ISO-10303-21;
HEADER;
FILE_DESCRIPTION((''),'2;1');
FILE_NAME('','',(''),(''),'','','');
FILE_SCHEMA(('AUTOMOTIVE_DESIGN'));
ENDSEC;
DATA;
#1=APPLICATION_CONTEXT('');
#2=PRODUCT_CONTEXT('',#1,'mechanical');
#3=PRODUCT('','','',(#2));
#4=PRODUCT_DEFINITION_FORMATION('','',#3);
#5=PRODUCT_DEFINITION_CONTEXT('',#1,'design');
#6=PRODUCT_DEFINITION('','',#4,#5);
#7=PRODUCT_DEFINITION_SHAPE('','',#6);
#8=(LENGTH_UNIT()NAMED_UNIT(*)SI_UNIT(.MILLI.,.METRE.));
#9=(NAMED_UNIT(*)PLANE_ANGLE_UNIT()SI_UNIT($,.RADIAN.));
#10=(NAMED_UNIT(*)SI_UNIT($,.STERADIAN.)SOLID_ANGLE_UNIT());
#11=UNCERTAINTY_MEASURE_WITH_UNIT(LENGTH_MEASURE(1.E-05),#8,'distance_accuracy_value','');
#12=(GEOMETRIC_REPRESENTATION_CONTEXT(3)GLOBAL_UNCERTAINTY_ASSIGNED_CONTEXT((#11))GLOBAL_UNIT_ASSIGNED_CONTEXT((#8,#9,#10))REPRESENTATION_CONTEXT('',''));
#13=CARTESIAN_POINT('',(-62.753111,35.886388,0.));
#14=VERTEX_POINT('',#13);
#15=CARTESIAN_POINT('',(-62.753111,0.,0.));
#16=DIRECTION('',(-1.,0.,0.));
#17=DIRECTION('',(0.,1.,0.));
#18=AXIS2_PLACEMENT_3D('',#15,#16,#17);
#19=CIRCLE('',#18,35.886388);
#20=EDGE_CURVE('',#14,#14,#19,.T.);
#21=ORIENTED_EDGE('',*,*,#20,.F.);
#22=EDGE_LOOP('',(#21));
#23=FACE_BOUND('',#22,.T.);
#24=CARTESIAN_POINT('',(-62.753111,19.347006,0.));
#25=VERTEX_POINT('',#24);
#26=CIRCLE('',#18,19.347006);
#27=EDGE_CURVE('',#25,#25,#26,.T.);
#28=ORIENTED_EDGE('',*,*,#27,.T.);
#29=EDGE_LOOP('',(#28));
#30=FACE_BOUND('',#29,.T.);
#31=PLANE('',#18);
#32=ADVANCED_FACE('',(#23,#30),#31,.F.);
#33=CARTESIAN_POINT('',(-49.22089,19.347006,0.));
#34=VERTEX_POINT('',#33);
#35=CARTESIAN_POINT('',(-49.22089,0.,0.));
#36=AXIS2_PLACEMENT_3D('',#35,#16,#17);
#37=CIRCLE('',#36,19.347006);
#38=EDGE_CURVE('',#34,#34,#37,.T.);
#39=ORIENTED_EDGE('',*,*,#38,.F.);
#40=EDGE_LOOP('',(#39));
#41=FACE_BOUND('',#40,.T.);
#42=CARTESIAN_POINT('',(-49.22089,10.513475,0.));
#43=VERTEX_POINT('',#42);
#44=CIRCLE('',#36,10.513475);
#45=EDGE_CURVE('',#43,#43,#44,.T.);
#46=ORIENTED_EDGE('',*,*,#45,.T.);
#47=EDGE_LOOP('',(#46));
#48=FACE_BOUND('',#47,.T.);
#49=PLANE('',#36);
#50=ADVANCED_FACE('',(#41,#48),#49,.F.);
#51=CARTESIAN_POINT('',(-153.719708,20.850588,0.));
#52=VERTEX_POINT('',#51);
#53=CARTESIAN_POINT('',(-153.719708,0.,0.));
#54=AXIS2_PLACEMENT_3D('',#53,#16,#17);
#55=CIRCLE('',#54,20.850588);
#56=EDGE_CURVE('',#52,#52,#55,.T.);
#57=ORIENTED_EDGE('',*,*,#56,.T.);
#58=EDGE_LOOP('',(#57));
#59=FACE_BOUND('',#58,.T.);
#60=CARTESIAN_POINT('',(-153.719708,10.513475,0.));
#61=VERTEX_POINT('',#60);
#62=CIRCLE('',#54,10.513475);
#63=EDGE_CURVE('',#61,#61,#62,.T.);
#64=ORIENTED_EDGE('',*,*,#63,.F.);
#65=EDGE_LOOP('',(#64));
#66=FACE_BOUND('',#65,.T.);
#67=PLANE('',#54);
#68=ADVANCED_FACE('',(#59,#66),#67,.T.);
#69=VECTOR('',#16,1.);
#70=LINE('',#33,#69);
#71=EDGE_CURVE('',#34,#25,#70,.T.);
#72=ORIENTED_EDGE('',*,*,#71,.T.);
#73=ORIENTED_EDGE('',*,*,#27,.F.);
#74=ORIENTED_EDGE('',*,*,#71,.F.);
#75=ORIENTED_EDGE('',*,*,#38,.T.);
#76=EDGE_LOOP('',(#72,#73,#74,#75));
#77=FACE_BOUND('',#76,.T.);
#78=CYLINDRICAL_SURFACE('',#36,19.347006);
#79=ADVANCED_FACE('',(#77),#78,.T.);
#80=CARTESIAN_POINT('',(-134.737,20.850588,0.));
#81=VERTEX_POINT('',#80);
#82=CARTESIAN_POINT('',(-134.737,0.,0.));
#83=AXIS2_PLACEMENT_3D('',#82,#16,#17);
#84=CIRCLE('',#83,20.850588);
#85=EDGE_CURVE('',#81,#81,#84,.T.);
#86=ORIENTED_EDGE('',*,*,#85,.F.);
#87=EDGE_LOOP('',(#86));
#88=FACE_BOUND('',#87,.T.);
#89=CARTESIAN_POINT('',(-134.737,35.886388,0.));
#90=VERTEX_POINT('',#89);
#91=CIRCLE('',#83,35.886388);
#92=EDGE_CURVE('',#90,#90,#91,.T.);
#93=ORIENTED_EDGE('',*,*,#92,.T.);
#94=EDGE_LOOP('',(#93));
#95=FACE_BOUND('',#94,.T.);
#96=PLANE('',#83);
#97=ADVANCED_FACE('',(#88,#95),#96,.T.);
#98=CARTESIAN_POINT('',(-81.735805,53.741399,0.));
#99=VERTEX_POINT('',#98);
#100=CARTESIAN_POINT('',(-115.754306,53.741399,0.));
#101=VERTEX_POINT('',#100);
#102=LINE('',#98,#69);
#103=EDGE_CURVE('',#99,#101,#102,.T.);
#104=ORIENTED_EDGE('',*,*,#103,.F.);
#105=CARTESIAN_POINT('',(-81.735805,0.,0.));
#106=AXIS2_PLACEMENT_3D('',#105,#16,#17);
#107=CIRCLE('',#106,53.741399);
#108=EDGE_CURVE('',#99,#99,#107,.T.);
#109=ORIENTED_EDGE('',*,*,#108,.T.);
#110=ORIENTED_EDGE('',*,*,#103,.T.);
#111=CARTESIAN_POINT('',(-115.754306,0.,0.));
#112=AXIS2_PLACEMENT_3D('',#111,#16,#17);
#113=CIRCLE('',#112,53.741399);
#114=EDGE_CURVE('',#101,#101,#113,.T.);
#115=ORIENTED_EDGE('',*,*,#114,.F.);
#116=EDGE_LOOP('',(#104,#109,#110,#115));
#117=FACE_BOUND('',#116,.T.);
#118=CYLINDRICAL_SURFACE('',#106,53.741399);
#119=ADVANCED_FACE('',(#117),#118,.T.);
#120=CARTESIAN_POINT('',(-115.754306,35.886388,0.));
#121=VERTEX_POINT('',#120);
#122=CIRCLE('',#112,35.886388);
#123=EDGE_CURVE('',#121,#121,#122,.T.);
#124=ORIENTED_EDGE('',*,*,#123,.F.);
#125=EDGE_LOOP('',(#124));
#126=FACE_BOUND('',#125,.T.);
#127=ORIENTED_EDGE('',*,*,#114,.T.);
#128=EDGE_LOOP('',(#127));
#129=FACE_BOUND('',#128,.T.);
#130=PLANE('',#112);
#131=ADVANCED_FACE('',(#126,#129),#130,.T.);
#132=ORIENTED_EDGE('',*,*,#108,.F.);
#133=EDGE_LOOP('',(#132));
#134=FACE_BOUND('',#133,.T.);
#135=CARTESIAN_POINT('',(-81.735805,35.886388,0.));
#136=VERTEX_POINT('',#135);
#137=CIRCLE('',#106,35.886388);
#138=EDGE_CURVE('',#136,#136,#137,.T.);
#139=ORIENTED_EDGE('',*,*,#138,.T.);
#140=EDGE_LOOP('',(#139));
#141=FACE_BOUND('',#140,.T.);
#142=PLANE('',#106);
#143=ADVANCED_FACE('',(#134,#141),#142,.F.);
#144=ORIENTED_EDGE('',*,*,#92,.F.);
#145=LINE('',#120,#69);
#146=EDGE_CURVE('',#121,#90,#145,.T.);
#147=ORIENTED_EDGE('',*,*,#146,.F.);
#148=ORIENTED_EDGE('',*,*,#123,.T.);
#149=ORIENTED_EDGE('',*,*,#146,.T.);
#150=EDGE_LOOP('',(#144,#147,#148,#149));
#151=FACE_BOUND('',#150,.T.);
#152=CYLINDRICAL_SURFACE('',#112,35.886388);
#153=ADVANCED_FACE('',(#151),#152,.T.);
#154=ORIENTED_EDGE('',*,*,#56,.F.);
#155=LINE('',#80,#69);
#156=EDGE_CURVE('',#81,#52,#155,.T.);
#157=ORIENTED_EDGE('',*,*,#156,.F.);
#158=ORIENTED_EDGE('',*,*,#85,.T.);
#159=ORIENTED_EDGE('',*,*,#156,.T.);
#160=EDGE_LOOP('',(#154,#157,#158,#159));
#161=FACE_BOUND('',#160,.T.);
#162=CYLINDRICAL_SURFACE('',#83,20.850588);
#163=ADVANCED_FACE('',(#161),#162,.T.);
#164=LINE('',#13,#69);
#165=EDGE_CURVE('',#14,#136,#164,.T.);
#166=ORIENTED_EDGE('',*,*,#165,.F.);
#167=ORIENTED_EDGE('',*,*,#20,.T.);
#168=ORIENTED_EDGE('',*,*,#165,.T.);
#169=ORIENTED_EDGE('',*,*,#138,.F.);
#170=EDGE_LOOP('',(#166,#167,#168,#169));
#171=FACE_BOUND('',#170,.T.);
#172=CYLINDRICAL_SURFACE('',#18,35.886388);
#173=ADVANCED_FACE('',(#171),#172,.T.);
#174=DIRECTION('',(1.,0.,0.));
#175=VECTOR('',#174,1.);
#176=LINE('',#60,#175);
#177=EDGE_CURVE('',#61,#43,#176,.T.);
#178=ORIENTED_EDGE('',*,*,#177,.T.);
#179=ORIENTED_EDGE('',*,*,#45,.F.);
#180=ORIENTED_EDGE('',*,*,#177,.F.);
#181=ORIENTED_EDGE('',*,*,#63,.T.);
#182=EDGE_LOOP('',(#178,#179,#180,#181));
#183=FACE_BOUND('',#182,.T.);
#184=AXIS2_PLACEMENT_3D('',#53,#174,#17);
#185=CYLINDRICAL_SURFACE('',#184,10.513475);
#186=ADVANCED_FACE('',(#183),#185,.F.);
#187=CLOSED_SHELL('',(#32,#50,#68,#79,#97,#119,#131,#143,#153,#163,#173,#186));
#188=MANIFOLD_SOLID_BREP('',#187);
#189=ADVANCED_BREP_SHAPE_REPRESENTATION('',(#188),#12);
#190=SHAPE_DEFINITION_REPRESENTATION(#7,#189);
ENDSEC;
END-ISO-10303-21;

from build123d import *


# Not quite as in the source:
# - the program builds the solid bodies; features that only make, move or delete a surface that nothing else refers to are left out


with BuildPart() as f5:
    # F4 (on Top) → F5 (revolve)
    with BuildSketch(Plane.XY):
        Polygon((-153.7197083235, 10.5134751648), (-49.2208898067, 10.5134751648), (-49.2208898067, 19.3470064551), (-62.753111124, 19.3470064551), (-62.753111124, 35.886388272), (-81.735804677, 35.886388272), (-81.735804677, 53.7413991988), (-115.7543063164, 53.7413991988), (-115.7543063164, 35.886388272), (-134.7369998693, 35.886388272), (-134.7369998693, 20.8505876362), (-153.7197083235, 20.8505876362), align=None)
    revolve(axis=Axis((-106.8370621651, 0, 0), (-1, 0, 0)))


solid = f5.part
